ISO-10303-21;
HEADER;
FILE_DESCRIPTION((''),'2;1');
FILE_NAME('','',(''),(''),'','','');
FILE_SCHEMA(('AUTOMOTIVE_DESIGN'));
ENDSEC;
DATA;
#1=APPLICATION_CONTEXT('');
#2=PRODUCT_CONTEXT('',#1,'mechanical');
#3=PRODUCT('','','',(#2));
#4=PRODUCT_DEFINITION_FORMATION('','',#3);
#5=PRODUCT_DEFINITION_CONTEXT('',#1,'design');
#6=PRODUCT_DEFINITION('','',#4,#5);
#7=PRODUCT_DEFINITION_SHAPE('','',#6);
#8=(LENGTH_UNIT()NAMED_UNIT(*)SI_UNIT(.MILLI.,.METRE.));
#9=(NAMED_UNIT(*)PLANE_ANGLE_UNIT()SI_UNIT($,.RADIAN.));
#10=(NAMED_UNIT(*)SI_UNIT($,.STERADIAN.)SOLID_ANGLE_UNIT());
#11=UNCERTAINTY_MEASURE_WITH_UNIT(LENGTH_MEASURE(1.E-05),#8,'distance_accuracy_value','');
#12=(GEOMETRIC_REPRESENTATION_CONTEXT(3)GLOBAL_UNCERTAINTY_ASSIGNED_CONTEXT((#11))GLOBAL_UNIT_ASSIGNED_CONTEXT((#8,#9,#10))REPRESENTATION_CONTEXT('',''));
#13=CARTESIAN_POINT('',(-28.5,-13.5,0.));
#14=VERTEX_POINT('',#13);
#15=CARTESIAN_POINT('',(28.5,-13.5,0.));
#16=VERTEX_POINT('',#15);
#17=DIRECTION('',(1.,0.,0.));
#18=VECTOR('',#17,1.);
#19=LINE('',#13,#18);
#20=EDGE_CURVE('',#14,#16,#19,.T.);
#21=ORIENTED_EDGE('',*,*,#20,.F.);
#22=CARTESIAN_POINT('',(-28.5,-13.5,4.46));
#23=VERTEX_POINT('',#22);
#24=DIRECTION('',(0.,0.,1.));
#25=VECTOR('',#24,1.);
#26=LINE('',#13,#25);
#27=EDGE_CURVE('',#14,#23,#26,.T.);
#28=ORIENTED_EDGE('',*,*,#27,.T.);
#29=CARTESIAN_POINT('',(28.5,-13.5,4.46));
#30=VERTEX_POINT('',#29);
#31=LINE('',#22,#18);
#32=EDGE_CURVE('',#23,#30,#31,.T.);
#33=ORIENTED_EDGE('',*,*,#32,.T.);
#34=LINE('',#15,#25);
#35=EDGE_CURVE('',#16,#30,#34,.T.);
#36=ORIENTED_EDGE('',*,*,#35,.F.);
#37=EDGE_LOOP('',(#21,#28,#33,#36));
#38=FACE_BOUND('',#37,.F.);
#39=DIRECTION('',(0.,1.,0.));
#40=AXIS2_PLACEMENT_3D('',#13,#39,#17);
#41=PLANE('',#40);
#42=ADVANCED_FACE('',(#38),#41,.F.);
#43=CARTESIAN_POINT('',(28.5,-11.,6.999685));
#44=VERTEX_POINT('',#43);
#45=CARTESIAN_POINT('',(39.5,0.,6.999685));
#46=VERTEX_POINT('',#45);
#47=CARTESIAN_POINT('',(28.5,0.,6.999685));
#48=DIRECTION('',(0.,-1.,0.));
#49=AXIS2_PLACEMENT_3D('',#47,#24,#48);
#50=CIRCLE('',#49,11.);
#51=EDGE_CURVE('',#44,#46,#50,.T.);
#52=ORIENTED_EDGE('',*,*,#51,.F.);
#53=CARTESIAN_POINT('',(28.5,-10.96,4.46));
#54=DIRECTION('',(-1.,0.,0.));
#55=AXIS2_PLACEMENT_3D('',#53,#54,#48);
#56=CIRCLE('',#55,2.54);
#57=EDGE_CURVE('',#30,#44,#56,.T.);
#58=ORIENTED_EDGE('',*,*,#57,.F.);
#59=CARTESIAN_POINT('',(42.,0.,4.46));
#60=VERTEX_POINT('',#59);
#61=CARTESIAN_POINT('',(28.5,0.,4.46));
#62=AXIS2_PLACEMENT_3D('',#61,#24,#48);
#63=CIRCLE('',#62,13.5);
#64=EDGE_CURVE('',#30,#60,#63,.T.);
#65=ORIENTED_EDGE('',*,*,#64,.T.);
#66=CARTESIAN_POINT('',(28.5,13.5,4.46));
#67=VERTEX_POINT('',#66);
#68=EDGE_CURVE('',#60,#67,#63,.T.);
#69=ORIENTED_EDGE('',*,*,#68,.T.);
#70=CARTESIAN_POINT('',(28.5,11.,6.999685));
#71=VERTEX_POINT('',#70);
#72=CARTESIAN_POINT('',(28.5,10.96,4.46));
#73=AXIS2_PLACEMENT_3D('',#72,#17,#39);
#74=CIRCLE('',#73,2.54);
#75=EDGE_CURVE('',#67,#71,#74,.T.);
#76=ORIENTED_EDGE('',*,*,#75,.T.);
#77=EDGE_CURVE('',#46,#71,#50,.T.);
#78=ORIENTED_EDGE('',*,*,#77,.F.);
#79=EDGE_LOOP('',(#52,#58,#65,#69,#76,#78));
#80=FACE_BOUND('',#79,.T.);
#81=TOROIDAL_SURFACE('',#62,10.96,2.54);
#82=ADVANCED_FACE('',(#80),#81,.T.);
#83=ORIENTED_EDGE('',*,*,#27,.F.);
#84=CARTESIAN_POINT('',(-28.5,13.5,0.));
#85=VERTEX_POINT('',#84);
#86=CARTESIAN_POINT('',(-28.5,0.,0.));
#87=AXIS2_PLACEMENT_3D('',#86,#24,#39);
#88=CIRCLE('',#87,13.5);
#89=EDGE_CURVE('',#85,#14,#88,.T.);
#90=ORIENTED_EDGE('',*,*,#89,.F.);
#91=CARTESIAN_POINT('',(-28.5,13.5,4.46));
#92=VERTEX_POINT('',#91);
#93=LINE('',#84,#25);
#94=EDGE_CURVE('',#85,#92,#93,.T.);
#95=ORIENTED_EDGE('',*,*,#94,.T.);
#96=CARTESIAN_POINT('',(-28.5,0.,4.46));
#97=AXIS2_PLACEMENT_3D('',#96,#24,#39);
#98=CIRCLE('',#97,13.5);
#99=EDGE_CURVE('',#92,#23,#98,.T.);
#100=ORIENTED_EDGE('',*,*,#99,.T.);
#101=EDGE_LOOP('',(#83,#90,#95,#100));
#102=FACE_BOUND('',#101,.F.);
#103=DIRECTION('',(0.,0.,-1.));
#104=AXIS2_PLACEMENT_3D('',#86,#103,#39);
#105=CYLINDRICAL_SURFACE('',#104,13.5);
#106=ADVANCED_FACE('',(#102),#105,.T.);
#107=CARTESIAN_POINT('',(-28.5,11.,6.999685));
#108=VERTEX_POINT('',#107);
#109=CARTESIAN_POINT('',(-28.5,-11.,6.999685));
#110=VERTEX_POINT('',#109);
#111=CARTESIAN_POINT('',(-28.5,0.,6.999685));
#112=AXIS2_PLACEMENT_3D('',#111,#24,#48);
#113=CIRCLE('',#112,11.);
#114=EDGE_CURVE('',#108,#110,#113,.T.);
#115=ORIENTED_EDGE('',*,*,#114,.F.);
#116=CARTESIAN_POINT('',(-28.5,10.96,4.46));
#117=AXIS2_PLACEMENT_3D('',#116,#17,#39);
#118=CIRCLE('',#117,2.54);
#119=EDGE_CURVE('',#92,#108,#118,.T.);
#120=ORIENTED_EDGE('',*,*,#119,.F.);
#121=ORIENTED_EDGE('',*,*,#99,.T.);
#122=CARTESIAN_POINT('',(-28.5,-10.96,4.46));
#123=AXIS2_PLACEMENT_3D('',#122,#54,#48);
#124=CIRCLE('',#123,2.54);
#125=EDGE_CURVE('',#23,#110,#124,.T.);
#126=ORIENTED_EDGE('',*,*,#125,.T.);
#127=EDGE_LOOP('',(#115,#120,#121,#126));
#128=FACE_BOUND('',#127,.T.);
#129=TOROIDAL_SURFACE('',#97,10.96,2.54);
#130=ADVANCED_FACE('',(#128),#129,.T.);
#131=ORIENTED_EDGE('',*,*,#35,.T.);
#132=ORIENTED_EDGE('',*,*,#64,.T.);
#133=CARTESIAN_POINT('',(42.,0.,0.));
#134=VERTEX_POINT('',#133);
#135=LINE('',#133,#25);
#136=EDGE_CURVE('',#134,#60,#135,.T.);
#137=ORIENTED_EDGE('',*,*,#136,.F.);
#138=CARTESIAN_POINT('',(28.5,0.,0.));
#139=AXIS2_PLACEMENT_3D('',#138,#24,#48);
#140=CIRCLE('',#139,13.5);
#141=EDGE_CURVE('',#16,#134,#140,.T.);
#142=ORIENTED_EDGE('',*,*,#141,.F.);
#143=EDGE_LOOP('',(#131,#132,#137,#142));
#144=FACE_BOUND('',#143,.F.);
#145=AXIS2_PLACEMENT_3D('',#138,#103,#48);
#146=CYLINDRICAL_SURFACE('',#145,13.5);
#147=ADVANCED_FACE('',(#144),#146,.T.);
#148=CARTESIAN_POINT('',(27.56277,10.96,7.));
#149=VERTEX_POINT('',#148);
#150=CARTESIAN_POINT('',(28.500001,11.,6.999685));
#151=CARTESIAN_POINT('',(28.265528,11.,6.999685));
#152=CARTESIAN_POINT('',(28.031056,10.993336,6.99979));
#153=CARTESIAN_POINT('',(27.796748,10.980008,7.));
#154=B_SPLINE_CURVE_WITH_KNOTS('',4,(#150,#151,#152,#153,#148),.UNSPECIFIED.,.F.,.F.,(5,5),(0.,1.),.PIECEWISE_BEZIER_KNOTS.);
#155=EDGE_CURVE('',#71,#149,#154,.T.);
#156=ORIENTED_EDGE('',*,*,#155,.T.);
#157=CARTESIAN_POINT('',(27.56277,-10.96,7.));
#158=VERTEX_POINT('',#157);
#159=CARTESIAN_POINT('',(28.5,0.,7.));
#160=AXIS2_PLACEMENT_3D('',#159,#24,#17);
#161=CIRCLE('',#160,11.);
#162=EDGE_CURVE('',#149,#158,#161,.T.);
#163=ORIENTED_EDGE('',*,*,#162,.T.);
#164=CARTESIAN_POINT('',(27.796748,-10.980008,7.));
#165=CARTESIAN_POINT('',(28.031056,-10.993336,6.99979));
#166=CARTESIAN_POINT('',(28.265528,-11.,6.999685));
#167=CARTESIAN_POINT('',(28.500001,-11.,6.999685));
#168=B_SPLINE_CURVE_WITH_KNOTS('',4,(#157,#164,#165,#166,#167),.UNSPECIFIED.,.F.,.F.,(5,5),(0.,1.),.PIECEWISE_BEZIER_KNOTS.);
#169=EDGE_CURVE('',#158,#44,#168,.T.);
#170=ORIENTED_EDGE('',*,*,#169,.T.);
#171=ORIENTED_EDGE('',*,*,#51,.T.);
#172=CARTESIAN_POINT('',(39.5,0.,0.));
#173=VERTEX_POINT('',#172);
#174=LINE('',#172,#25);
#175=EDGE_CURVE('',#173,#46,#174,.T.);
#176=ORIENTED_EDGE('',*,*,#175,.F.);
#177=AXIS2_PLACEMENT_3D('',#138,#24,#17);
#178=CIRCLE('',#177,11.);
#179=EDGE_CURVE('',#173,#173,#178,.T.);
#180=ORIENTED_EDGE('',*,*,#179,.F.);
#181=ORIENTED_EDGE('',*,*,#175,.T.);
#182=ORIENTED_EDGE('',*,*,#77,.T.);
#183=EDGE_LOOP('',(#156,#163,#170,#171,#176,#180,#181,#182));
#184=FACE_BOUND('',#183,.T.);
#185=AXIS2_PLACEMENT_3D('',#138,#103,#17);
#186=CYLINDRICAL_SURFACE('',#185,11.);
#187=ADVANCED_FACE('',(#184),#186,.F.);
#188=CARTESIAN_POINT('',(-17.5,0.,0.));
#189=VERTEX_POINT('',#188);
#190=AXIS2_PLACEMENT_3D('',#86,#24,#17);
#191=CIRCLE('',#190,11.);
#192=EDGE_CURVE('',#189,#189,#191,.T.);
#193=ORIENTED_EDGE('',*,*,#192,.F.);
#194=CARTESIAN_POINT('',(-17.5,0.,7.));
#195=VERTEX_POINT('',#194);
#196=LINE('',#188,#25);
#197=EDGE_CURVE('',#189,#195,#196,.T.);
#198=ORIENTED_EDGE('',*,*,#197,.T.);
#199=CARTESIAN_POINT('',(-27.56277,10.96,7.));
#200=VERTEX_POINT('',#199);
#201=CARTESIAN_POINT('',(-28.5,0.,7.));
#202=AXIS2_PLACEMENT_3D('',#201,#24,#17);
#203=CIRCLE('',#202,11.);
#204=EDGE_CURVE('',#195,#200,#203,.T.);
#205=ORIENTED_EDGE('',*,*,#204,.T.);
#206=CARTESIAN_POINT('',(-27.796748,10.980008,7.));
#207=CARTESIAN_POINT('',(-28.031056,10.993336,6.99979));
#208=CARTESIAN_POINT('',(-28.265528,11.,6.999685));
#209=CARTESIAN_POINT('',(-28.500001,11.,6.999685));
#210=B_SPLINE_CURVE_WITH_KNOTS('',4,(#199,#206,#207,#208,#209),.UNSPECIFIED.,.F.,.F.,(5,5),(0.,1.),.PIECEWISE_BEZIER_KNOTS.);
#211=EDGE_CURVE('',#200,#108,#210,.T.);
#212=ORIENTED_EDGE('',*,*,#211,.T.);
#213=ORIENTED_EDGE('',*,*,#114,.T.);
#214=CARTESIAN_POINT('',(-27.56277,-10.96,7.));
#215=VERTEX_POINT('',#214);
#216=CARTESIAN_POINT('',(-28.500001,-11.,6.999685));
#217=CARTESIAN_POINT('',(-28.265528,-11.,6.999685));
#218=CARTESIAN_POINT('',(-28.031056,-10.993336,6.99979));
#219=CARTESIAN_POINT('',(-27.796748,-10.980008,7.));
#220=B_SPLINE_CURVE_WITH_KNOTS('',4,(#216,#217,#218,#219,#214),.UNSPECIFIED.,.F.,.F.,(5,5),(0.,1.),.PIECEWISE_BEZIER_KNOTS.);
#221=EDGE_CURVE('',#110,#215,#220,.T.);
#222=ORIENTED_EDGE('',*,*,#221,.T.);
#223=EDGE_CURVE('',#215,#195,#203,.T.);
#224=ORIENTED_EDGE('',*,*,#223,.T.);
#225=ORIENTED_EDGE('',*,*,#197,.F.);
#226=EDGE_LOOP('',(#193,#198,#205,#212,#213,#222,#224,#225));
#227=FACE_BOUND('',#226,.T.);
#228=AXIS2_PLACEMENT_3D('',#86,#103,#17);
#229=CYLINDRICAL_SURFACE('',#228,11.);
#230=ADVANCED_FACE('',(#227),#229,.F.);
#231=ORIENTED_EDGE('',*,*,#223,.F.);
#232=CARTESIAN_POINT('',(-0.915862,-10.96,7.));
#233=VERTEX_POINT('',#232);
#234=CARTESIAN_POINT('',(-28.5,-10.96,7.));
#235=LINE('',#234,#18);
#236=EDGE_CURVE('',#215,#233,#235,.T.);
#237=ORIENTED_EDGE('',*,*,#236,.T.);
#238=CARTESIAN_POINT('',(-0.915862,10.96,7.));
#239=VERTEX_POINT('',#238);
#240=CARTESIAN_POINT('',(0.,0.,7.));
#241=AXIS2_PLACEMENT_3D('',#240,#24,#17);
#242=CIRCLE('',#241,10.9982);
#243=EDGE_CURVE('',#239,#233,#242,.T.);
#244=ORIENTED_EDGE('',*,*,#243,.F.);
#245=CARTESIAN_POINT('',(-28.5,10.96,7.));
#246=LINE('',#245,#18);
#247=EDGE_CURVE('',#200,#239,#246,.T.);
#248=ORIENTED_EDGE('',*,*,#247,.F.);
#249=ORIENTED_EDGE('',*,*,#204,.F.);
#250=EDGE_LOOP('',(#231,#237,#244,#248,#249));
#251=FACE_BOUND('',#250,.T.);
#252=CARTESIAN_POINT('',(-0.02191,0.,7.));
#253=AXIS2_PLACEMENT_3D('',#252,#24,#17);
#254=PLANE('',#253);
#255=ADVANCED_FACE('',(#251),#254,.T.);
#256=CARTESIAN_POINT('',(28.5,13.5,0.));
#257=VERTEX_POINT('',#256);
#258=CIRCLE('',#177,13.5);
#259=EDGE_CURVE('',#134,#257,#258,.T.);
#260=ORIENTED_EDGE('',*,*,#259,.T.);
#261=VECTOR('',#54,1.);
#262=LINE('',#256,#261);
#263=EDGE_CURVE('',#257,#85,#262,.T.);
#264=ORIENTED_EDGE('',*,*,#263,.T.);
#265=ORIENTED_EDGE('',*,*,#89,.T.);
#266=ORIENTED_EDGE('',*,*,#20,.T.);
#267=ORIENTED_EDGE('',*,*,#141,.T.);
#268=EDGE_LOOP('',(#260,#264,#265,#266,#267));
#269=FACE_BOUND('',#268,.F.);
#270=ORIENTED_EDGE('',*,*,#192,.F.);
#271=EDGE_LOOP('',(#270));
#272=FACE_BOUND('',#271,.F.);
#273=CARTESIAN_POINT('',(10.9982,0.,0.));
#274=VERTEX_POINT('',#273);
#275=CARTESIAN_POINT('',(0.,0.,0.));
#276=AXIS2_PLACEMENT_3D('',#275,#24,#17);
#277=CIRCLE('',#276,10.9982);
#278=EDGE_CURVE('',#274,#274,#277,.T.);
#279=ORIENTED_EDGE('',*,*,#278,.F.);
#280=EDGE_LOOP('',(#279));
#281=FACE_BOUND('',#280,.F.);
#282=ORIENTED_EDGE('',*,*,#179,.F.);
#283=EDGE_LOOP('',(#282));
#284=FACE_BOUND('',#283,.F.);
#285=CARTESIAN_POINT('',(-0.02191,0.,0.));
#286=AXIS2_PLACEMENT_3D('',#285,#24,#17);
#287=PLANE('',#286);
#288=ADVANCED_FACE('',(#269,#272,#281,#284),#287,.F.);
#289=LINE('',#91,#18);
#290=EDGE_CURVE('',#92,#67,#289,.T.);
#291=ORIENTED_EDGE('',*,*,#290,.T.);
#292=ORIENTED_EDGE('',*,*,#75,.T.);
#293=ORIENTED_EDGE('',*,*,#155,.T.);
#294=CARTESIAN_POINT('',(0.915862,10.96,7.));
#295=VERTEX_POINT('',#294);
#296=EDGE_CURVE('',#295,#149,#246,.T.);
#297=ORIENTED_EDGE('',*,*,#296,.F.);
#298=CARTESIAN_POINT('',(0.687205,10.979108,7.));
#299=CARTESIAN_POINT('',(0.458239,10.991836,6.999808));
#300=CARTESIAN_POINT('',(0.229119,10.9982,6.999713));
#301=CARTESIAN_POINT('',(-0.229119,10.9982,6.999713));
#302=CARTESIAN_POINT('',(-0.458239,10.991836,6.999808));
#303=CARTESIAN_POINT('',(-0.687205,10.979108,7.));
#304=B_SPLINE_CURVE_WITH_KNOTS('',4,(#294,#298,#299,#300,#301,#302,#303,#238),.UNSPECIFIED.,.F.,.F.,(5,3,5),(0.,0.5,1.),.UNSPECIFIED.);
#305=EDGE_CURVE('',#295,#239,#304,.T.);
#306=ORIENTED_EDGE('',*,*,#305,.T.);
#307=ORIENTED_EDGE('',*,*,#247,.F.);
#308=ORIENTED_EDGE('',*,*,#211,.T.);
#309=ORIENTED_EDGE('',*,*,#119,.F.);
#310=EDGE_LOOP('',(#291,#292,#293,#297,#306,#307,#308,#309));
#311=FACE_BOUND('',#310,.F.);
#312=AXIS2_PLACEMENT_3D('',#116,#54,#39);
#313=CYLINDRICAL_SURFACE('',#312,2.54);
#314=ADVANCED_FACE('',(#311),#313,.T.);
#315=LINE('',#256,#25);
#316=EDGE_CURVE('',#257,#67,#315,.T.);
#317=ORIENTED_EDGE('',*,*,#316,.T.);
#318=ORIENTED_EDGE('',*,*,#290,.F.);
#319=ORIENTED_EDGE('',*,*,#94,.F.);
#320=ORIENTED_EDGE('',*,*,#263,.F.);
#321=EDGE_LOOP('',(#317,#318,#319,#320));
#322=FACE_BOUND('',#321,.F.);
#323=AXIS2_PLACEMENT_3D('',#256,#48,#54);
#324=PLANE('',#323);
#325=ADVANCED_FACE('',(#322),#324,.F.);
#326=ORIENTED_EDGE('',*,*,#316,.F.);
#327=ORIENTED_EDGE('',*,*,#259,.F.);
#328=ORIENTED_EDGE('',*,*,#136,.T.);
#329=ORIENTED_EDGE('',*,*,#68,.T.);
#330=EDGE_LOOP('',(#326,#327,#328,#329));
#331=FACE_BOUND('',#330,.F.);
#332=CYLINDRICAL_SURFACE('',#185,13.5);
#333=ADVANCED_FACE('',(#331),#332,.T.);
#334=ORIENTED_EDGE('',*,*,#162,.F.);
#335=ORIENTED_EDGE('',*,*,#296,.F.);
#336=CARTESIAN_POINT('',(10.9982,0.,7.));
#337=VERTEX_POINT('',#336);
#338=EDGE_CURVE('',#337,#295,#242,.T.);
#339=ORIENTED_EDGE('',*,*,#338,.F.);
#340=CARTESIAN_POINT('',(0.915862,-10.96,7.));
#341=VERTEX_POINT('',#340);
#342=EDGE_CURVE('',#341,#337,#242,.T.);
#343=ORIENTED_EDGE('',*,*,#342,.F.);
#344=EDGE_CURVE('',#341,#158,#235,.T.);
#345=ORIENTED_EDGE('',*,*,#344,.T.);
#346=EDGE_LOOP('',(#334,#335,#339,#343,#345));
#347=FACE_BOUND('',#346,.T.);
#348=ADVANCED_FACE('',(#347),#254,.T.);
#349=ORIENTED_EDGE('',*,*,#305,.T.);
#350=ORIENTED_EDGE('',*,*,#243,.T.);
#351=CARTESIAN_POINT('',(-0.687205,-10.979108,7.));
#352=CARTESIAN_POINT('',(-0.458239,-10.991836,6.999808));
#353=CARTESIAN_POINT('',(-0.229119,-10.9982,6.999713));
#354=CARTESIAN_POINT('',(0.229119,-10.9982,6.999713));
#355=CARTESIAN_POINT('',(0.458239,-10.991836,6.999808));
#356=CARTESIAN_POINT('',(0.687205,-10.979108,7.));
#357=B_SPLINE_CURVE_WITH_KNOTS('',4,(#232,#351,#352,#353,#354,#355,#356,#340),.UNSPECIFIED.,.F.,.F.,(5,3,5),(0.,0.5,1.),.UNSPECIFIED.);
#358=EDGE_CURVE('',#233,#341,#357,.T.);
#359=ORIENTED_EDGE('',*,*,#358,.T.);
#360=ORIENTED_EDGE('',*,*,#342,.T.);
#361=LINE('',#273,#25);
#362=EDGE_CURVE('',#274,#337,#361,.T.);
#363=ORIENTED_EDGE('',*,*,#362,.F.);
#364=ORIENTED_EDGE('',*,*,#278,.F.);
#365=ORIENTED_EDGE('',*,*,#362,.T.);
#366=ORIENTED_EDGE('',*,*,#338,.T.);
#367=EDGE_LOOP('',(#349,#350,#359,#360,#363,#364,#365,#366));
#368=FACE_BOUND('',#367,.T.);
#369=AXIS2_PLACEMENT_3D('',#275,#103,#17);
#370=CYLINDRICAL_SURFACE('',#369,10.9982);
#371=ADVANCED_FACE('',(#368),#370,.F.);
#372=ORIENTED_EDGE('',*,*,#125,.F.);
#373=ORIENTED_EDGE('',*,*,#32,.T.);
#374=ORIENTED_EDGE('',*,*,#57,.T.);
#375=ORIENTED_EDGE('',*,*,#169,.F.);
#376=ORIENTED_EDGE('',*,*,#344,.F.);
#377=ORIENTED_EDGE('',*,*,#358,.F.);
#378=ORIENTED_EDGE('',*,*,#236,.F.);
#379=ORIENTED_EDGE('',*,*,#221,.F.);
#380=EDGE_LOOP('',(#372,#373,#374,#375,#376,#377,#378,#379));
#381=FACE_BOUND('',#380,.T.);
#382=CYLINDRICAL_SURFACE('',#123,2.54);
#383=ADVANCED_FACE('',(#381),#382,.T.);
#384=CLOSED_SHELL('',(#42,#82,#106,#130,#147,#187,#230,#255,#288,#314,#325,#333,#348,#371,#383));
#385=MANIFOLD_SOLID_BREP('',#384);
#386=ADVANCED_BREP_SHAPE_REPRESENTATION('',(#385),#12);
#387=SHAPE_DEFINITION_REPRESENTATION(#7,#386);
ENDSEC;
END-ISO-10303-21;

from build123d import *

# Parameters (mm, degrees)
F0_R        = 10.9982
F0_R_2      = 11
F1_DEPTH    = 7
F2_T1_DEPTH = 57
F2_T4_ANGLE = 180
F2_T6_ANGLE = 180


# Not quite as in the source:
# - a fillet or chamfer that OpenCascade refuses, or shapes differently, is made with other operations: its cross-section is extruded or revolved along the edge and cut away or added


with BuildPart() as f1:
    # F0 (on Top) → F1 (new body)
    with BuildSketch(Plane.XY):
        with BuildLine():
            ThreePointArc((-28.5, 13.5), (-18.954058454, 9.545941546), (-15, 0))
            ThreePointArc((-15, 0), (-18.954058454, -9.545941546), (-28.5, -13.5))
            Line((-28.5, -13.5), (28.5, -13.5))
            ThreePointArc((28.5, -13.5), (15, 0), (28.5, 13.5))
            Line((28.5, 13.5), (-28.5, 13.5))
        make_face()
        Circle(F0_R, mode=Mode.SUBTRACT)
        with BuildLine():
            ThreePointArc((-28.5, -13.5), (-18.954058454, -9.545941546), (-15, 0))
            ThreePointArc((-15, 0), (-18.954058454, 9.545941546), (-28.5, 13.5))
            ThreePointArc((-28.5, 13.5), (-42, 0), (-28.5, -13.5))
        make_face()
        with Locations((-28.5, 0)):
            Circle(F0_R_2, mode=Mode.SUBTRACT)
        with BuildLine():
            ThreePointArc((42, 0), (38.045941546, 9.545941546), (28.5, 13.5))
            ThreePointArc((28.5, 13.5), (15, 0), (28.5, -13.5))
            ThreePointArc((28.5, -13.5), (38.045941546, -9.545941546), (42, 0))
        make_face()
        with Locations((28.5, 0)):
            Circle(F0_R_2, mode=Mode.SUBTRACT)
    extrude(amount=F1_DEPTH)

    # F2: fillet of radius 2.54 on 4 edges, made by hand

    # F2_s2 → F2_t1 (cut)
    with BuildSketch(Plane.YZ.offset(-28.5)):
        with BuildLine():
            ThreePointArc((13.5, 4.46), (12.7560512242, 6.2560512242), (10.96, 7))
            Line((10.96, 7), (13.5, 7))
            Line((13.5, 7), (13.5, 4.46))
        make_face()
        with BuildLine():
            ThreePointArc((-13.5, 4.46), (-12.7560512242, 6.2560512242), (-10.96, 7))
            Line((-10.96, 7), (-13.5, 7))
            Line((-13.5, 7), (-13.5, 4.46))
        make_face()
    extrude(amount=F2_T1_DEPTH, mode=Mode.SUBTRACT)

    # F2_s3 → F2_t4 (revolve, cut)
    with BuildSketch(Plane.YZ.offset(-28.5)):
        with BuildLine():
            ThreePointArc((13.5, 4.46), (12.7560512242, 6.2560512242), (10.96, 7))
            Line((10.96, 7), (13.5, 7))
            Line((13.5, 7), (13.5, 4.46))
        make_face()
    revolve(axis=Axis((-28.5, 0, 7), (0, 0, 1)), revolution_arc=F2_T4_ANGLE, mode=Mode.SUBTRACT)

    # F2_s5 → F2_t6 (revolve, cut)
    with BuildSketch(Plane.YZ.offset(28.5)):
        with BuildLine():
            ThreePointArc((-13.5, 4.46), (-12.7560512242, 6.2560512242), (-10.96, 7))
            Line((-10.96, 7), (-13.5, 7))
            Line((-13.5, 7), (-13.5, 4.46))
        make_face()
    revolve(axis=Axis((28.5, 0, 7), (0, 0, 1)), revolution_arc=F2_T6_ANGLE, mode=Mode.SUBTRACT)


solid = f1.part
